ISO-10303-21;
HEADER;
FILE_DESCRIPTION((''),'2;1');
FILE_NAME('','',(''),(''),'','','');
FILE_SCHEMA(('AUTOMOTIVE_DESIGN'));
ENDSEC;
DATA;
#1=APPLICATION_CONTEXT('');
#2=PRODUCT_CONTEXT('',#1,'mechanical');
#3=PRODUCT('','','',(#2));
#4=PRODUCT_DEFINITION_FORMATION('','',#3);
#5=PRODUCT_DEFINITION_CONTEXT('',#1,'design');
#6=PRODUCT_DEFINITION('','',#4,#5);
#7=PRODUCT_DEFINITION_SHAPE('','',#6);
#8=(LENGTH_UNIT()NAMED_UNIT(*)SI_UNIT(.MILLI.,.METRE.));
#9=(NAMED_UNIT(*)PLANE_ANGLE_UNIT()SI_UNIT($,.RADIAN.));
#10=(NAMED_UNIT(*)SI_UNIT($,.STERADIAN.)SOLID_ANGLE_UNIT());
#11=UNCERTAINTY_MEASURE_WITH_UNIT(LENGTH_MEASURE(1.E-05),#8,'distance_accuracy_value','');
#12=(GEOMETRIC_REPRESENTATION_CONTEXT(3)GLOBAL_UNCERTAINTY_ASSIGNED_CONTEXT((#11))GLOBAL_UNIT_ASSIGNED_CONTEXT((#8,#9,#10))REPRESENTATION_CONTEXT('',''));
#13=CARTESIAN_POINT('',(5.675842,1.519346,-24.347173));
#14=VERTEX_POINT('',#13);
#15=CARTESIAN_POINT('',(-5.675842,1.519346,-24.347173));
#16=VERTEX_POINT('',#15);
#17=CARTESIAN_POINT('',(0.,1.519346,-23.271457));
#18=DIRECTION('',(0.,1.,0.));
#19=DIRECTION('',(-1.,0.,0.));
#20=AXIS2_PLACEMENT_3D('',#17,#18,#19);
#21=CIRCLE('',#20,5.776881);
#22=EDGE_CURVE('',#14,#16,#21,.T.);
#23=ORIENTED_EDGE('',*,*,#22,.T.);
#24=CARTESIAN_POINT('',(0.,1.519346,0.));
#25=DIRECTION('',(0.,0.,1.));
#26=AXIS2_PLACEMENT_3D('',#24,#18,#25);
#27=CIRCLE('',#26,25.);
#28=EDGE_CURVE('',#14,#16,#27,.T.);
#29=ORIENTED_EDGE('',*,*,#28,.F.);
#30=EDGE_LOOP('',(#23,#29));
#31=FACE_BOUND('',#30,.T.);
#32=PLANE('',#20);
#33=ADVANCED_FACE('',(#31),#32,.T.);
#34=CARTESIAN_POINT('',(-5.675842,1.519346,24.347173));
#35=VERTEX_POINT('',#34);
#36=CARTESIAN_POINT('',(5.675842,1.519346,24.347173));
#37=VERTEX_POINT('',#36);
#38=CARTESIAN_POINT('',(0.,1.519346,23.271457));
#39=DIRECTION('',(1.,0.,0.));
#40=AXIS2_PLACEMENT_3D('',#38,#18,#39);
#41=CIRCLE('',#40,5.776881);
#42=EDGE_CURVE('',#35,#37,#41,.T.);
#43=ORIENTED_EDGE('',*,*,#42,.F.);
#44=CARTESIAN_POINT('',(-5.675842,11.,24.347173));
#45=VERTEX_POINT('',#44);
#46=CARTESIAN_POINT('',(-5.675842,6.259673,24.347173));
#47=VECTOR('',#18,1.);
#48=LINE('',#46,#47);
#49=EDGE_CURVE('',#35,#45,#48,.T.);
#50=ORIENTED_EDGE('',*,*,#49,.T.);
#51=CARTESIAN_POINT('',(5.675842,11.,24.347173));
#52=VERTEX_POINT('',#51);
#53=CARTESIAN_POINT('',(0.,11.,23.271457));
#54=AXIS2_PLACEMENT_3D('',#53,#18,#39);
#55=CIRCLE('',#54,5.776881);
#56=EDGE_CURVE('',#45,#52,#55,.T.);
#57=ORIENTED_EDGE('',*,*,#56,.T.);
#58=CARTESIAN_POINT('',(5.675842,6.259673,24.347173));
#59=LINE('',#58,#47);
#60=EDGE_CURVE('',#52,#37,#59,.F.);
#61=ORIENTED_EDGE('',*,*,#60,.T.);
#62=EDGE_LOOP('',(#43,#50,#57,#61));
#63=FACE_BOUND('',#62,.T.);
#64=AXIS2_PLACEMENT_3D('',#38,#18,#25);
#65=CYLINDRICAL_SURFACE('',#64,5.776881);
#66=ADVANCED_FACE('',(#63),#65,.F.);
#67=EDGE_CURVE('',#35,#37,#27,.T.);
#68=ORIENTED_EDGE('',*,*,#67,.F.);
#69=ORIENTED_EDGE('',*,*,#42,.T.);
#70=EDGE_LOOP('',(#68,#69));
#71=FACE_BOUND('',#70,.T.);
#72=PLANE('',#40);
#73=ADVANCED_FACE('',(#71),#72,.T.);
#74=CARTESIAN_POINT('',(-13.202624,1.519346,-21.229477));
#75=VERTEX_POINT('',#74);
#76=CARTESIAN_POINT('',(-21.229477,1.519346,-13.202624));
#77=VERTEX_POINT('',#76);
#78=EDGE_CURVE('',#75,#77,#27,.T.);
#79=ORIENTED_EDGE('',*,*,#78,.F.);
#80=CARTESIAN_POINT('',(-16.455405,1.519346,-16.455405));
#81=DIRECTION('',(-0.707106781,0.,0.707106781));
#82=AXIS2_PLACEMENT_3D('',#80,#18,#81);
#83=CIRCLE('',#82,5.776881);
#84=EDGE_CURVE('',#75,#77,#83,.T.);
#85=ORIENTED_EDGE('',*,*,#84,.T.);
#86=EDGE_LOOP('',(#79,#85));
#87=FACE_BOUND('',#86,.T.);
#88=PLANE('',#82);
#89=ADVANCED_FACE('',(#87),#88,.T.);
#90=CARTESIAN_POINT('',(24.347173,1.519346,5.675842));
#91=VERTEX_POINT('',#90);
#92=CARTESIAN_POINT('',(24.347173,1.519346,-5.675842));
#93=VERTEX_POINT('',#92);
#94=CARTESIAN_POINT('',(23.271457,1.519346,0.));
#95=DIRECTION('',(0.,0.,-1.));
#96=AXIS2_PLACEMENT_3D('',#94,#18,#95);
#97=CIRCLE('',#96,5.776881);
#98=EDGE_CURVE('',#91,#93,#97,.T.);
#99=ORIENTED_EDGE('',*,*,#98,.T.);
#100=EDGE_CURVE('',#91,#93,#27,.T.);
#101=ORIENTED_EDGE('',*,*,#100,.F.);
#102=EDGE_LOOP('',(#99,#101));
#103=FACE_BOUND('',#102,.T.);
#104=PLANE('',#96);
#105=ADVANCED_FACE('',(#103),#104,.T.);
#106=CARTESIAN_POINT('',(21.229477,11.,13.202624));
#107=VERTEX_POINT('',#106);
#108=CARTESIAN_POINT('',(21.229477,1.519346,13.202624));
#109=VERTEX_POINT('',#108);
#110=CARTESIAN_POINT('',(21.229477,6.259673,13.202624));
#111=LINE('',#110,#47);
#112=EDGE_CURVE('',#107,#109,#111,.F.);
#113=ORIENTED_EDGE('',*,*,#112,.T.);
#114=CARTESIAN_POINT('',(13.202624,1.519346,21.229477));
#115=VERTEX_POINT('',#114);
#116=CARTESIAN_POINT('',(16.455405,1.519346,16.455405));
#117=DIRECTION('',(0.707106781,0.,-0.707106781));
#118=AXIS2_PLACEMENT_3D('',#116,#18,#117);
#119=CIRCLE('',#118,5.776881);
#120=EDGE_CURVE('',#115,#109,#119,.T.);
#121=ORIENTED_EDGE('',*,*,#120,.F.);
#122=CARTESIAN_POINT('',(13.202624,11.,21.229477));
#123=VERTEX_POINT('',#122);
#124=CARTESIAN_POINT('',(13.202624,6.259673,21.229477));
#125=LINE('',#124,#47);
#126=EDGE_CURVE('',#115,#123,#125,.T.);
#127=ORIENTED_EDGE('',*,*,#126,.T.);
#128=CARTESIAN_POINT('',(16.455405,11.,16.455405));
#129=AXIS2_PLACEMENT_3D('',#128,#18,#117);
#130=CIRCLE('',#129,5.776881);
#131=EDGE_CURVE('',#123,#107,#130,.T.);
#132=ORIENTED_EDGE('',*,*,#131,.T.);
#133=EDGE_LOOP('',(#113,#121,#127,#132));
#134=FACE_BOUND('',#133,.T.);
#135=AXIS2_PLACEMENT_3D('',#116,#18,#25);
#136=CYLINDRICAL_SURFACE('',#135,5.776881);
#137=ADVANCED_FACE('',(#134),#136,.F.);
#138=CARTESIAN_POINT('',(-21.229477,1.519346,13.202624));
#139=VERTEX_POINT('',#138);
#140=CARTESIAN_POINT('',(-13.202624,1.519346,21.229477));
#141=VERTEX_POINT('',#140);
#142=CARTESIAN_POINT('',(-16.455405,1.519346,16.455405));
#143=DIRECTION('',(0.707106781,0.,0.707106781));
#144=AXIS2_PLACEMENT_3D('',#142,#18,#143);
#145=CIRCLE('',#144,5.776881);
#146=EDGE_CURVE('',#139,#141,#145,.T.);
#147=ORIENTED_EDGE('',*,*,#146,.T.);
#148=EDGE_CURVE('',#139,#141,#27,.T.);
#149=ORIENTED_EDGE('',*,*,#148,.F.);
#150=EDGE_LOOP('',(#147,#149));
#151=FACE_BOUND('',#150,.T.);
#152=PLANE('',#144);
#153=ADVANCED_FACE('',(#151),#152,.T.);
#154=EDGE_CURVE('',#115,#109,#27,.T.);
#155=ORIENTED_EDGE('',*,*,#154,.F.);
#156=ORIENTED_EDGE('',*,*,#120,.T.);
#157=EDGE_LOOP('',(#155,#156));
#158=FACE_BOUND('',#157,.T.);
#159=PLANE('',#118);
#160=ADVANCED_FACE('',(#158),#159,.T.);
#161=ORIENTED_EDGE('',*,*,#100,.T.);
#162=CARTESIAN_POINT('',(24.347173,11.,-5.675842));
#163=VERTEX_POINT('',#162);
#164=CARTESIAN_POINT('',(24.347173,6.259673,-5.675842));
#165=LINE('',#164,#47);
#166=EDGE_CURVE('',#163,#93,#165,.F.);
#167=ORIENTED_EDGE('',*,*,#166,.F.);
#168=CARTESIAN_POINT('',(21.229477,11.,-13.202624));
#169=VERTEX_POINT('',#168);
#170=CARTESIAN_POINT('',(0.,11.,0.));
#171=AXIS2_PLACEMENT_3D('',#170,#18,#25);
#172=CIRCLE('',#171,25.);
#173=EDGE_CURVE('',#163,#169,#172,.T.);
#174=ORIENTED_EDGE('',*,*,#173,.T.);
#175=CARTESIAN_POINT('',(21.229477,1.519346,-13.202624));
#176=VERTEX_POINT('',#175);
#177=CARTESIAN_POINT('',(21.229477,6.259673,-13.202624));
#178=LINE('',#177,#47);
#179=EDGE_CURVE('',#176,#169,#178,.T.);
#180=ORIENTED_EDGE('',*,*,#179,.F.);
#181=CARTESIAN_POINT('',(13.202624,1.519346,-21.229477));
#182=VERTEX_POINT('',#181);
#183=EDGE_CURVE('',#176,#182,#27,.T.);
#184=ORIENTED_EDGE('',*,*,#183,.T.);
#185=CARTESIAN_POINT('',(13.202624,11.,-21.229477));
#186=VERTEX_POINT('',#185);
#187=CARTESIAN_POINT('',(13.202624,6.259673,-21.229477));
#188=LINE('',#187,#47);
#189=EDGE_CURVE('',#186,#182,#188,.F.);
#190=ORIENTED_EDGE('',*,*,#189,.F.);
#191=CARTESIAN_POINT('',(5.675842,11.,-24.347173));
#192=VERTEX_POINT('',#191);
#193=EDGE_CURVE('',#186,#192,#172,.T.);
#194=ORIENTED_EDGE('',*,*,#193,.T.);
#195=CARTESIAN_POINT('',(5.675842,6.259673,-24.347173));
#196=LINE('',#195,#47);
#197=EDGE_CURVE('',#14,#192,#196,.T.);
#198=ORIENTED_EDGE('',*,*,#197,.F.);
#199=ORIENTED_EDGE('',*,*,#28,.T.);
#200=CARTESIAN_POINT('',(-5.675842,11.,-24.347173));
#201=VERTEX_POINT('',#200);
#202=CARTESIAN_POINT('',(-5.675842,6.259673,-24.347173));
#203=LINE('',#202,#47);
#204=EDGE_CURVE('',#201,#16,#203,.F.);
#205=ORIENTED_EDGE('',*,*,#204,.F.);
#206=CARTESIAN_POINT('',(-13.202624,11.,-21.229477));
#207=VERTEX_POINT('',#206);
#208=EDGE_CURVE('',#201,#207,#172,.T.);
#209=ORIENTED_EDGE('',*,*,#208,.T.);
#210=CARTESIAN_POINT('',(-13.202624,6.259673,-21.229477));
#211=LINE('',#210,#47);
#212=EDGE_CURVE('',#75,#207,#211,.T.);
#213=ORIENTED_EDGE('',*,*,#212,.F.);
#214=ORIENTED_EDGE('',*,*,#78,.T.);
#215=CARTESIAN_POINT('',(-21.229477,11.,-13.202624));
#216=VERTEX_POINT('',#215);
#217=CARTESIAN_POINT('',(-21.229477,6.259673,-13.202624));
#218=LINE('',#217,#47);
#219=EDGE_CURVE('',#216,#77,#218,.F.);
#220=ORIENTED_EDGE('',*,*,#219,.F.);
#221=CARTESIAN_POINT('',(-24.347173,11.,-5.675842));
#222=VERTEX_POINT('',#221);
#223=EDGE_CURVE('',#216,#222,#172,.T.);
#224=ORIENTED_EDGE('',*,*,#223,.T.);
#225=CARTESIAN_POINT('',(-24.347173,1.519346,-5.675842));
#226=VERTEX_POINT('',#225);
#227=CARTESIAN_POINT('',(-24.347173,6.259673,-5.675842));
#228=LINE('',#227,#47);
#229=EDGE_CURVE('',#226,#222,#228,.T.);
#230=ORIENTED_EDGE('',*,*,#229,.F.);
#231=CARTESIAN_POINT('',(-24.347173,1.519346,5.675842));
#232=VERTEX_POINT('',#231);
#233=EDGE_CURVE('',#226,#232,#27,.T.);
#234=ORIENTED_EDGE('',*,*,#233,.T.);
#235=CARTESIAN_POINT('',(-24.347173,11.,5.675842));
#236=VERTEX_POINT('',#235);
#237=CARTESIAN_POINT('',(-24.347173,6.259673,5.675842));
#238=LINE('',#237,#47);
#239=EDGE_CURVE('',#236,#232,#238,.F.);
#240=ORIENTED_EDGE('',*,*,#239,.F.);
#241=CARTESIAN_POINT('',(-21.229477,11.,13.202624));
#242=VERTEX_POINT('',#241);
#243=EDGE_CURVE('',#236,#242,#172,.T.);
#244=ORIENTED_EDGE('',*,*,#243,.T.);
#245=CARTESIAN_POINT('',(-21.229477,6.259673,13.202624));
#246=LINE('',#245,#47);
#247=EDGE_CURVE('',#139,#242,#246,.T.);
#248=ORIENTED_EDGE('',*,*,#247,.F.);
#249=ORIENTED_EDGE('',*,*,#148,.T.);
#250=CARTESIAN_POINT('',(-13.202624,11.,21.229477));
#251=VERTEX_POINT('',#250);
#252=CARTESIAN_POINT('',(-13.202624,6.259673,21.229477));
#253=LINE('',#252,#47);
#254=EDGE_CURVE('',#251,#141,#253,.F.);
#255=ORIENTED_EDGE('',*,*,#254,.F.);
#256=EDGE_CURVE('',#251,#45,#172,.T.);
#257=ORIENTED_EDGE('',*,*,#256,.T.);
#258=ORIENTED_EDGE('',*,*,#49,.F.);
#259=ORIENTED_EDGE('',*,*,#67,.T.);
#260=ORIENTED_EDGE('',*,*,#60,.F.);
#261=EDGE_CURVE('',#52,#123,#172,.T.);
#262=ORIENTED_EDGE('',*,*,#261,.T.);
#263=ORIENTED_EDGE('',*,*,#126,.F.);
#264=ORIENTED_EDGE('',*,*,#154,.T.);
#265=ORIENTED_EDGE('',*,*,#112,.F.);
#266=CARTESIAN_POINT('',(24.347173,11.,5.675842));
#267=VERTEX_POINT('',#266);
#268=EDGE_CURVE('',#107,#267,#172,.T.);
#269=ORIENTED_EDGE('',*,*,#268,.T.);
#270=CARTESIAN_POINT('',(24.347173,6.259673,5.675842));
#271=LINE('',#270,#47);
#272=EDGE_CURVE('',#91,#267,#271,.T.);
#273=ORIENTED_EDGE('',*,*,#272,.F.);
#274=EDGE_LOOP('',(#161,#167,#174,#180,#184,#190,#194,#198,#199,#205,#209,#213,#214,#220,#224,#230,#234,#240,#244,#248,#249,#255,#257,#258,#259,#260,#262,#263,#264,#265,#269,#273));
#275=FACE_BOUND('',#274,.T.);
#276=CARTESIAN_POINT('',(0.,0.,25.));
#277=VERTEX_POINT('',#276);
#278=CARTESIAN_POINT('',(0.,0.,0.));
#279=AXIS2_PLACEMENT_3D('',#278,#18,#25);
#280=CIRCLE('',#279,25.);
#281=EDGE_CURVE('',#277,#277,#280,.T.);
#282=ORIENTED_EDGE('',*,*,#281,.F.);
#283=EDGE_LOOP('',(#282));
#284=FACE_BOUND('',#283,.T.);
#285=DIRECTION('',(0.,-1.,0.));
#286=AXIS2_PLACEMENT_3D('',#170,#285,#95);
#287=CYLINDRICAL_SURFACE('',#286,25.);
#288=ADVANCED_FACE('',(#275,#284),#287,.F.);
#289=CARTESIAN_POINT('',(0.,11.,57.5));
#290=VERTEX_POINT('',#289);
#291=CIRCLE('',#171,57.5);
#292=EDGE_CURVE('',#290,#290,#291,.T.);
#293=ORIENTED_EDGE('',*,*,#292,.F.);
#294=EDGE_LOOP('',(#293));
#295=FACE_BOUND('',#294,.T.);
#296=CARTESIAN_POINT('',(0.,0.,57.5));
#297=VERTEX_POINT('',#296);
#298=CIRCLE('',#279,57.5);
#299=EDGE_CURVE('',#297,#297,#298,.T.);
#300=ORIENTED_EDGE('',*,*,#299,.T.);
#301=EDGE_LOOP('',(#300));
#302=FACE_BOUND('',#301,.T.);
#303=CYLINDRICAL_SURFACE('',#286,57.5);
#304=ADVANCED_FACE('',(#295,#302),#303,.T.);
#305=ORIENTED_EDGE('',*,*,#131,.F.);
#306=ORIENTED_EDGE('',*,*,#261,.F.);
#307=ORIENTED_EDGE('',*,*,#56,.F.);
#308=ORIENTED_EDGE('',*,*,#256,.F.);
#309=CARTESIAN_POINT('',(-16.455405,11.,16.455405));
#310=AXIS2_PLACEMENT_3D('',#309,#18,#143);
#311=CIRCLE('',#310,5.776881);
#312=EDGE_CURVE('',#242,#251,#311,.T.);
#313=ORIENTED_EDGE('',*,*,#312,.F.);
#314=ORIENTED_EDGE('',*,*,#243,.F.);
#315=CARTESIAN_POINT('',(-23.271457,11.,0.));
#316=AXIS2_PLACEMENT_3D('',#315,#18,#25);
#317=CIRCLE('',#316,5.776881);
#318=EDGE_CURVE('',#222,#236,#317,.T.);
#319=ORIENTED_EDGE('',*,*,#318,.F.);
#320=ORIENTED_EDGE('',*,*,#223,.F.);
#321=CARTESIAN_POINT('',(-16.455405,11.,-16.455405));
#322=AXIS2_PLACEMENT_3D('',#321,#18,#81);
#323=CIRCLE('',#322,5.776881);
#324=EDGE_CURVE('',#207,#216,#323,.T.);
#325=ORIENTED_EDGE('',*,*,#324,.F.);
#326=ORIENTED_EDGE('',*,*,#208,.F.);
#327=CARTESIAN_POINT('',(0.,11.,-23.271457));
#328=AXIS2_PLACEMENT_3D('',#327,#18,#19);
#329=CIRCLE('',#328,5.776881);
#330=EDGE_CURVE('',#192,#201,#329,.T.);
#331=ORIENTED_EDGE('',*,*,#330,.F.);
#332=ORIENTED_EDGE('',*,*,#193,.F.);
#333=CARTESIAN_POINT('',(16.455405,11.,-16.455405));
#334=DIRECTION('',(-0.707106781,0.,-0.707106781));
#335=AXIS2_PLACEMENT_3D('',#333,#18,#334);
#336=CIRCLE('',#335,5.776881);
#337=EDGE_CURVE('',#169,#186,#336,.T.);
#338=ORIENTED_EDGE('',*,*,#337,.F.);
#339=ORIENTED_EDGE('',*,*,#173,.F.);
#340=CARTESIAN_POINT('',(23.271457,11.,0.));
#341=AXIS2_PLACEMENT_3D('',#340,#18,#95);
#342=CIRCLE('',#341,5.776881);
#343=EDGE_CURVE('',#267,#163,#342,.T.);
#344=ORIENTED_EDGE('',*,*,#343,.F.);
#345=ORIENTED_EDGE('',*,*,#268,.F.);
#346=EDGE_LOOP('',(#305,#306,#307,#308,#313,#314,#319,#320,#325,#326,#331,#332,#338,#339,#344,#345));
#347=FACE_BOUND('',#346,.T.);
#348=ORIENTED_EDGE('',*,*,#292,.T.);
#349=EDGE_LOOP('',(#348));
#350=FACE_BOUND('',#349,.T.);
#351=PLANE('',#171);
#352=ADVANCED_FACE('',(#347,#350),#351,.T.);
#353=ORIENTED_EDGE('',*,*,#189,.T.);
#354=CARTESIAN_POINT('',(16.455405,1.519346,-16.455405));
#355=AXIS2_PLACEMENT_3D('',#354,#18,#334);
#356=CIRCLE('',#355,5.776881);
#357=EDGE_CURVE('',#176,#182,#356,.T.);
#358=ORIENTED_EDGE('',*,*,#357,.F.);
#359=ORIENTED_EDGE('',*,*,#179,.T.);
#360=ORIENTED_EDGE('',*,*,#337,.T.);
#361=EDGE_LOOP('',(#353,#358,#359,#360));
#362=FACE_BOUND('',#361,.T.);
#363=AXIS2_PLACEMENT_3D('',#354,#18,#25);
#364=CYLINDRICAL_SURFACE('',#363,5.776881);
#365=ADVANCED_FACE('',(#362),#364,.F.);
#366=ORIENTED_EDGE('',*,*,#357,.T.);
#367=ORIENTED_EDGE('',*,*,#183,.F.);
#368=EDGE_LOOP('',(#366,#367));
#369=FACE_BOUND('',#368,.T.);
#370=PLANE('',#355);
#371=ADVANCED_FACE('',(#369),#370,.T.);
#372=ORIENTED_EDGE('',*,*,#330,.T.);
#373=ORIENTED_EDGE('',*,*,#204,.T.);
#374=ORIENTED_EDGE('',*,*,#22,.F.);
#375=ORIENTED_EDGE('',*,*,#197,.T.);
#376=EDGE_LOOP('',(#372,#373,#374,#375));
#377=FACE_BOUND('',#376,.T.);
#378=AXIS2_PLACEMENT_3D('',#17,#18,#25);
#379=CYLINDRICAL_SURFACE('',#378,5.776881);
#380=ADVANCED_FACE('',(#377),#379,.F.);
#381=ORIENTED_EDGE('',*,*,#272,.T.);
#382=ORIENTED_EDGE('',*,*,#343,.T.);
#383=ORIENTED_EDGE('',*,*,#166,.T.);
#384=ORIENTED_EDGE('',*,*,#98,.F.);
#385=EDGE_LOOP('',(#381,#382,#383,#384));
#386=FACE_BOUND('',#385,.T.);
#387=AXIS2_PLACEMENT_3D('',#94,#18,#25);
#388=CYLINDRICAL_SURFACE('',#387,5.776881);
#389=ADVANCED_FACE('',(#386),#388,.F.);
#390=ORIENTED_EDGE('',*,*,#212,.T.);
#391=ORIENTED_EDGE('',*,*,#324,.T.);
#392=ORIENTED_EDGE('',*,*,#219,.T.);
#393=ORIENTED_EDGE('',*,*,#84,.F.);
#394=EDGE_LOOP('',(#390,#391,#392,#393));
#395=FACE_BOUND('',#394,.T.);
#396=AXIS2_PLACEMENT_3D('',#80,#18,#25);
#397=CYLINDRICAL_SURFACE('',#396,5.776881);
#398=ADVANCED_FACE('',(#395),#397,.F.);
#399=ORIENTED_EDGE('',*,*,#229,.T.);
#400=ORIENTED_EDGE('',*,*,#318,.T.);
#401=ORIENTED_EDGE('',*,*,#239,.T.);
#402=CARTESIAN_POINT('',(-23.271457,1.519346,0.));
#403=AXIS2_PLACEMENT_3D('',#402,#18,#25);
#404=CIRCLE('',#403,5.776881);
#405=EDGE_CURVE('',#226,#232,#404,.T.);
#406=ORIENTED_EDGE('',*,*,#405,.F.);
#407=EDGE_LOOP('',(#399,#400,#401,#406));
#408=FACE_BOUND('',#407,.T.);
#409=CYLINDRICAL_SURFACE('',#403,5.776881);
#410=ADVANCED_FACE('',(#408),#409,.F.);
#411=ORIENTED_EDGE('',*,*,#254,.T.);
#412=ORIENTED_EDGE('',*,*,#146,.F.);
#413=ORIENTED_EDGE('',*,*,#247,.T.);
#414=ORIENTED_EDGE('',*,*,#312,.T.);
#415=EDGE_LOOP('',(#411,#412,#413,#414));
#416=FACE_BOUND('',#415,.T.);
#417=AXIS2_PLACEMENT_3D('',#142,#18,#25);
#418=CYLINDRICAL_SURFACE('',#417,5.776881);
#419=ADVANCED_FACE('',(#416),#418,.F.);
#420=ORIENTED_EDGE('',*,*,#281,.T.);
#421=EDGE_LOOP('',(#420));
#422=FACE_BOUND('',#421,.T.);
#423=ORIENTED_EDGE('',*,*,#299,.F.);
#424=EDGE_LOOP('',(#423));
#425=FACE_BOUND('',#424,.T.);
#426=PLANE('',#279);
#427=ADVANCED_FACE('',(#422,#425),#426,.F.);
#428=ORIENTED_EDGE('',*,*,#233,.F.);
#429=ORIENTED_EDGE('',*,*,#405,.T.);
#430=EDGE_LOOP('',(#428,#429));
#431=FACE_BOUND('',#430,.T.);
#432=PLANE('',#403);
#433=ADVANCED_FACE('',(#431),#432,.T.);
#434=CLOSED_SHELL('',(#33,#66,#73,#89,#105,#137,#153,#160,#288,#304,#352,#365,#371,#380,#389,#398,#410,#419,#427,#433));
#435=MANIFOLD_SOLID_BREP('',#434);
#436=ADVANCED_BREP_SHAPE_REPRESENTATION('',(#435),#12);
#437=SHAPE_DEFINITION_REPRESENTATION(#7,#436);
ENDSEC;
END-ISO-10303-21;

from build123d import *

# Parameters (mm, degrees)
SKETCH1_R           = 57.5
BOSS_EXTRUDE1_DEPTH = 11
SKETCH2_R           = 25
CUT_EXTRUDE1_DEPTH  = 83.057906383
SKETCH3_R           = 5.776880647
CUT_EXTRUDE2_DEPTH  = 9.480654172
CIRPATTERN1_COUNT   = 8


with BuildPart() as part:
    # Sketch1 → Boss-Extrude1 (new body)
    with BuildSketch(Plane(origin=(0, 0, 0), x_dir=(1, 0, 0), z_dir=(0, 1, 0))):
        Circle(SKETCH1_R)
    extrude(amount=BOSS_EXTRUDE1_DEPTH)

    # Sketch2 → Cut-Extrude1 (cut, through all)
    with BuildSketch(Plane(origin=(0, 0, 0), x_dir=(1, 0, 0), z_dir=(0, 1, 0))):
        Circle(SKETCH2_R)
    extrude(amount=CUT_EXTRUDE1_DEPTH, mode=Mode.SUBTRACT)

    # Sketch3 → Cut-Extrude2 (cut)
    with BuildSketch(Plane(origin=(0, 11, 0), x_dir=(1, 0, 0), z_dir=(0, 1, 0))):
        with Locations((-23.271457007, 0)):
            Circle(SKETCH3_R)
    cut_extrude2 = extrude(amount=-CUT_EXTRUDE2_DEPTH, mode=Mode.SUBTRACT)

    # CirPattern1: Cut-Extrude2 ×8 about axis
    cirpattern1_axis = Axis((0, 0, 0), (0, 1, 0))
    for i in range(1, CIRPATTERN1_COUNT):
        add(cut_extrude2.rotate(cirpattern1_axis, i * 360 / CIRPATTERN1_COUNT), mode=Mode.SUBTRACT)


solid = part.part
